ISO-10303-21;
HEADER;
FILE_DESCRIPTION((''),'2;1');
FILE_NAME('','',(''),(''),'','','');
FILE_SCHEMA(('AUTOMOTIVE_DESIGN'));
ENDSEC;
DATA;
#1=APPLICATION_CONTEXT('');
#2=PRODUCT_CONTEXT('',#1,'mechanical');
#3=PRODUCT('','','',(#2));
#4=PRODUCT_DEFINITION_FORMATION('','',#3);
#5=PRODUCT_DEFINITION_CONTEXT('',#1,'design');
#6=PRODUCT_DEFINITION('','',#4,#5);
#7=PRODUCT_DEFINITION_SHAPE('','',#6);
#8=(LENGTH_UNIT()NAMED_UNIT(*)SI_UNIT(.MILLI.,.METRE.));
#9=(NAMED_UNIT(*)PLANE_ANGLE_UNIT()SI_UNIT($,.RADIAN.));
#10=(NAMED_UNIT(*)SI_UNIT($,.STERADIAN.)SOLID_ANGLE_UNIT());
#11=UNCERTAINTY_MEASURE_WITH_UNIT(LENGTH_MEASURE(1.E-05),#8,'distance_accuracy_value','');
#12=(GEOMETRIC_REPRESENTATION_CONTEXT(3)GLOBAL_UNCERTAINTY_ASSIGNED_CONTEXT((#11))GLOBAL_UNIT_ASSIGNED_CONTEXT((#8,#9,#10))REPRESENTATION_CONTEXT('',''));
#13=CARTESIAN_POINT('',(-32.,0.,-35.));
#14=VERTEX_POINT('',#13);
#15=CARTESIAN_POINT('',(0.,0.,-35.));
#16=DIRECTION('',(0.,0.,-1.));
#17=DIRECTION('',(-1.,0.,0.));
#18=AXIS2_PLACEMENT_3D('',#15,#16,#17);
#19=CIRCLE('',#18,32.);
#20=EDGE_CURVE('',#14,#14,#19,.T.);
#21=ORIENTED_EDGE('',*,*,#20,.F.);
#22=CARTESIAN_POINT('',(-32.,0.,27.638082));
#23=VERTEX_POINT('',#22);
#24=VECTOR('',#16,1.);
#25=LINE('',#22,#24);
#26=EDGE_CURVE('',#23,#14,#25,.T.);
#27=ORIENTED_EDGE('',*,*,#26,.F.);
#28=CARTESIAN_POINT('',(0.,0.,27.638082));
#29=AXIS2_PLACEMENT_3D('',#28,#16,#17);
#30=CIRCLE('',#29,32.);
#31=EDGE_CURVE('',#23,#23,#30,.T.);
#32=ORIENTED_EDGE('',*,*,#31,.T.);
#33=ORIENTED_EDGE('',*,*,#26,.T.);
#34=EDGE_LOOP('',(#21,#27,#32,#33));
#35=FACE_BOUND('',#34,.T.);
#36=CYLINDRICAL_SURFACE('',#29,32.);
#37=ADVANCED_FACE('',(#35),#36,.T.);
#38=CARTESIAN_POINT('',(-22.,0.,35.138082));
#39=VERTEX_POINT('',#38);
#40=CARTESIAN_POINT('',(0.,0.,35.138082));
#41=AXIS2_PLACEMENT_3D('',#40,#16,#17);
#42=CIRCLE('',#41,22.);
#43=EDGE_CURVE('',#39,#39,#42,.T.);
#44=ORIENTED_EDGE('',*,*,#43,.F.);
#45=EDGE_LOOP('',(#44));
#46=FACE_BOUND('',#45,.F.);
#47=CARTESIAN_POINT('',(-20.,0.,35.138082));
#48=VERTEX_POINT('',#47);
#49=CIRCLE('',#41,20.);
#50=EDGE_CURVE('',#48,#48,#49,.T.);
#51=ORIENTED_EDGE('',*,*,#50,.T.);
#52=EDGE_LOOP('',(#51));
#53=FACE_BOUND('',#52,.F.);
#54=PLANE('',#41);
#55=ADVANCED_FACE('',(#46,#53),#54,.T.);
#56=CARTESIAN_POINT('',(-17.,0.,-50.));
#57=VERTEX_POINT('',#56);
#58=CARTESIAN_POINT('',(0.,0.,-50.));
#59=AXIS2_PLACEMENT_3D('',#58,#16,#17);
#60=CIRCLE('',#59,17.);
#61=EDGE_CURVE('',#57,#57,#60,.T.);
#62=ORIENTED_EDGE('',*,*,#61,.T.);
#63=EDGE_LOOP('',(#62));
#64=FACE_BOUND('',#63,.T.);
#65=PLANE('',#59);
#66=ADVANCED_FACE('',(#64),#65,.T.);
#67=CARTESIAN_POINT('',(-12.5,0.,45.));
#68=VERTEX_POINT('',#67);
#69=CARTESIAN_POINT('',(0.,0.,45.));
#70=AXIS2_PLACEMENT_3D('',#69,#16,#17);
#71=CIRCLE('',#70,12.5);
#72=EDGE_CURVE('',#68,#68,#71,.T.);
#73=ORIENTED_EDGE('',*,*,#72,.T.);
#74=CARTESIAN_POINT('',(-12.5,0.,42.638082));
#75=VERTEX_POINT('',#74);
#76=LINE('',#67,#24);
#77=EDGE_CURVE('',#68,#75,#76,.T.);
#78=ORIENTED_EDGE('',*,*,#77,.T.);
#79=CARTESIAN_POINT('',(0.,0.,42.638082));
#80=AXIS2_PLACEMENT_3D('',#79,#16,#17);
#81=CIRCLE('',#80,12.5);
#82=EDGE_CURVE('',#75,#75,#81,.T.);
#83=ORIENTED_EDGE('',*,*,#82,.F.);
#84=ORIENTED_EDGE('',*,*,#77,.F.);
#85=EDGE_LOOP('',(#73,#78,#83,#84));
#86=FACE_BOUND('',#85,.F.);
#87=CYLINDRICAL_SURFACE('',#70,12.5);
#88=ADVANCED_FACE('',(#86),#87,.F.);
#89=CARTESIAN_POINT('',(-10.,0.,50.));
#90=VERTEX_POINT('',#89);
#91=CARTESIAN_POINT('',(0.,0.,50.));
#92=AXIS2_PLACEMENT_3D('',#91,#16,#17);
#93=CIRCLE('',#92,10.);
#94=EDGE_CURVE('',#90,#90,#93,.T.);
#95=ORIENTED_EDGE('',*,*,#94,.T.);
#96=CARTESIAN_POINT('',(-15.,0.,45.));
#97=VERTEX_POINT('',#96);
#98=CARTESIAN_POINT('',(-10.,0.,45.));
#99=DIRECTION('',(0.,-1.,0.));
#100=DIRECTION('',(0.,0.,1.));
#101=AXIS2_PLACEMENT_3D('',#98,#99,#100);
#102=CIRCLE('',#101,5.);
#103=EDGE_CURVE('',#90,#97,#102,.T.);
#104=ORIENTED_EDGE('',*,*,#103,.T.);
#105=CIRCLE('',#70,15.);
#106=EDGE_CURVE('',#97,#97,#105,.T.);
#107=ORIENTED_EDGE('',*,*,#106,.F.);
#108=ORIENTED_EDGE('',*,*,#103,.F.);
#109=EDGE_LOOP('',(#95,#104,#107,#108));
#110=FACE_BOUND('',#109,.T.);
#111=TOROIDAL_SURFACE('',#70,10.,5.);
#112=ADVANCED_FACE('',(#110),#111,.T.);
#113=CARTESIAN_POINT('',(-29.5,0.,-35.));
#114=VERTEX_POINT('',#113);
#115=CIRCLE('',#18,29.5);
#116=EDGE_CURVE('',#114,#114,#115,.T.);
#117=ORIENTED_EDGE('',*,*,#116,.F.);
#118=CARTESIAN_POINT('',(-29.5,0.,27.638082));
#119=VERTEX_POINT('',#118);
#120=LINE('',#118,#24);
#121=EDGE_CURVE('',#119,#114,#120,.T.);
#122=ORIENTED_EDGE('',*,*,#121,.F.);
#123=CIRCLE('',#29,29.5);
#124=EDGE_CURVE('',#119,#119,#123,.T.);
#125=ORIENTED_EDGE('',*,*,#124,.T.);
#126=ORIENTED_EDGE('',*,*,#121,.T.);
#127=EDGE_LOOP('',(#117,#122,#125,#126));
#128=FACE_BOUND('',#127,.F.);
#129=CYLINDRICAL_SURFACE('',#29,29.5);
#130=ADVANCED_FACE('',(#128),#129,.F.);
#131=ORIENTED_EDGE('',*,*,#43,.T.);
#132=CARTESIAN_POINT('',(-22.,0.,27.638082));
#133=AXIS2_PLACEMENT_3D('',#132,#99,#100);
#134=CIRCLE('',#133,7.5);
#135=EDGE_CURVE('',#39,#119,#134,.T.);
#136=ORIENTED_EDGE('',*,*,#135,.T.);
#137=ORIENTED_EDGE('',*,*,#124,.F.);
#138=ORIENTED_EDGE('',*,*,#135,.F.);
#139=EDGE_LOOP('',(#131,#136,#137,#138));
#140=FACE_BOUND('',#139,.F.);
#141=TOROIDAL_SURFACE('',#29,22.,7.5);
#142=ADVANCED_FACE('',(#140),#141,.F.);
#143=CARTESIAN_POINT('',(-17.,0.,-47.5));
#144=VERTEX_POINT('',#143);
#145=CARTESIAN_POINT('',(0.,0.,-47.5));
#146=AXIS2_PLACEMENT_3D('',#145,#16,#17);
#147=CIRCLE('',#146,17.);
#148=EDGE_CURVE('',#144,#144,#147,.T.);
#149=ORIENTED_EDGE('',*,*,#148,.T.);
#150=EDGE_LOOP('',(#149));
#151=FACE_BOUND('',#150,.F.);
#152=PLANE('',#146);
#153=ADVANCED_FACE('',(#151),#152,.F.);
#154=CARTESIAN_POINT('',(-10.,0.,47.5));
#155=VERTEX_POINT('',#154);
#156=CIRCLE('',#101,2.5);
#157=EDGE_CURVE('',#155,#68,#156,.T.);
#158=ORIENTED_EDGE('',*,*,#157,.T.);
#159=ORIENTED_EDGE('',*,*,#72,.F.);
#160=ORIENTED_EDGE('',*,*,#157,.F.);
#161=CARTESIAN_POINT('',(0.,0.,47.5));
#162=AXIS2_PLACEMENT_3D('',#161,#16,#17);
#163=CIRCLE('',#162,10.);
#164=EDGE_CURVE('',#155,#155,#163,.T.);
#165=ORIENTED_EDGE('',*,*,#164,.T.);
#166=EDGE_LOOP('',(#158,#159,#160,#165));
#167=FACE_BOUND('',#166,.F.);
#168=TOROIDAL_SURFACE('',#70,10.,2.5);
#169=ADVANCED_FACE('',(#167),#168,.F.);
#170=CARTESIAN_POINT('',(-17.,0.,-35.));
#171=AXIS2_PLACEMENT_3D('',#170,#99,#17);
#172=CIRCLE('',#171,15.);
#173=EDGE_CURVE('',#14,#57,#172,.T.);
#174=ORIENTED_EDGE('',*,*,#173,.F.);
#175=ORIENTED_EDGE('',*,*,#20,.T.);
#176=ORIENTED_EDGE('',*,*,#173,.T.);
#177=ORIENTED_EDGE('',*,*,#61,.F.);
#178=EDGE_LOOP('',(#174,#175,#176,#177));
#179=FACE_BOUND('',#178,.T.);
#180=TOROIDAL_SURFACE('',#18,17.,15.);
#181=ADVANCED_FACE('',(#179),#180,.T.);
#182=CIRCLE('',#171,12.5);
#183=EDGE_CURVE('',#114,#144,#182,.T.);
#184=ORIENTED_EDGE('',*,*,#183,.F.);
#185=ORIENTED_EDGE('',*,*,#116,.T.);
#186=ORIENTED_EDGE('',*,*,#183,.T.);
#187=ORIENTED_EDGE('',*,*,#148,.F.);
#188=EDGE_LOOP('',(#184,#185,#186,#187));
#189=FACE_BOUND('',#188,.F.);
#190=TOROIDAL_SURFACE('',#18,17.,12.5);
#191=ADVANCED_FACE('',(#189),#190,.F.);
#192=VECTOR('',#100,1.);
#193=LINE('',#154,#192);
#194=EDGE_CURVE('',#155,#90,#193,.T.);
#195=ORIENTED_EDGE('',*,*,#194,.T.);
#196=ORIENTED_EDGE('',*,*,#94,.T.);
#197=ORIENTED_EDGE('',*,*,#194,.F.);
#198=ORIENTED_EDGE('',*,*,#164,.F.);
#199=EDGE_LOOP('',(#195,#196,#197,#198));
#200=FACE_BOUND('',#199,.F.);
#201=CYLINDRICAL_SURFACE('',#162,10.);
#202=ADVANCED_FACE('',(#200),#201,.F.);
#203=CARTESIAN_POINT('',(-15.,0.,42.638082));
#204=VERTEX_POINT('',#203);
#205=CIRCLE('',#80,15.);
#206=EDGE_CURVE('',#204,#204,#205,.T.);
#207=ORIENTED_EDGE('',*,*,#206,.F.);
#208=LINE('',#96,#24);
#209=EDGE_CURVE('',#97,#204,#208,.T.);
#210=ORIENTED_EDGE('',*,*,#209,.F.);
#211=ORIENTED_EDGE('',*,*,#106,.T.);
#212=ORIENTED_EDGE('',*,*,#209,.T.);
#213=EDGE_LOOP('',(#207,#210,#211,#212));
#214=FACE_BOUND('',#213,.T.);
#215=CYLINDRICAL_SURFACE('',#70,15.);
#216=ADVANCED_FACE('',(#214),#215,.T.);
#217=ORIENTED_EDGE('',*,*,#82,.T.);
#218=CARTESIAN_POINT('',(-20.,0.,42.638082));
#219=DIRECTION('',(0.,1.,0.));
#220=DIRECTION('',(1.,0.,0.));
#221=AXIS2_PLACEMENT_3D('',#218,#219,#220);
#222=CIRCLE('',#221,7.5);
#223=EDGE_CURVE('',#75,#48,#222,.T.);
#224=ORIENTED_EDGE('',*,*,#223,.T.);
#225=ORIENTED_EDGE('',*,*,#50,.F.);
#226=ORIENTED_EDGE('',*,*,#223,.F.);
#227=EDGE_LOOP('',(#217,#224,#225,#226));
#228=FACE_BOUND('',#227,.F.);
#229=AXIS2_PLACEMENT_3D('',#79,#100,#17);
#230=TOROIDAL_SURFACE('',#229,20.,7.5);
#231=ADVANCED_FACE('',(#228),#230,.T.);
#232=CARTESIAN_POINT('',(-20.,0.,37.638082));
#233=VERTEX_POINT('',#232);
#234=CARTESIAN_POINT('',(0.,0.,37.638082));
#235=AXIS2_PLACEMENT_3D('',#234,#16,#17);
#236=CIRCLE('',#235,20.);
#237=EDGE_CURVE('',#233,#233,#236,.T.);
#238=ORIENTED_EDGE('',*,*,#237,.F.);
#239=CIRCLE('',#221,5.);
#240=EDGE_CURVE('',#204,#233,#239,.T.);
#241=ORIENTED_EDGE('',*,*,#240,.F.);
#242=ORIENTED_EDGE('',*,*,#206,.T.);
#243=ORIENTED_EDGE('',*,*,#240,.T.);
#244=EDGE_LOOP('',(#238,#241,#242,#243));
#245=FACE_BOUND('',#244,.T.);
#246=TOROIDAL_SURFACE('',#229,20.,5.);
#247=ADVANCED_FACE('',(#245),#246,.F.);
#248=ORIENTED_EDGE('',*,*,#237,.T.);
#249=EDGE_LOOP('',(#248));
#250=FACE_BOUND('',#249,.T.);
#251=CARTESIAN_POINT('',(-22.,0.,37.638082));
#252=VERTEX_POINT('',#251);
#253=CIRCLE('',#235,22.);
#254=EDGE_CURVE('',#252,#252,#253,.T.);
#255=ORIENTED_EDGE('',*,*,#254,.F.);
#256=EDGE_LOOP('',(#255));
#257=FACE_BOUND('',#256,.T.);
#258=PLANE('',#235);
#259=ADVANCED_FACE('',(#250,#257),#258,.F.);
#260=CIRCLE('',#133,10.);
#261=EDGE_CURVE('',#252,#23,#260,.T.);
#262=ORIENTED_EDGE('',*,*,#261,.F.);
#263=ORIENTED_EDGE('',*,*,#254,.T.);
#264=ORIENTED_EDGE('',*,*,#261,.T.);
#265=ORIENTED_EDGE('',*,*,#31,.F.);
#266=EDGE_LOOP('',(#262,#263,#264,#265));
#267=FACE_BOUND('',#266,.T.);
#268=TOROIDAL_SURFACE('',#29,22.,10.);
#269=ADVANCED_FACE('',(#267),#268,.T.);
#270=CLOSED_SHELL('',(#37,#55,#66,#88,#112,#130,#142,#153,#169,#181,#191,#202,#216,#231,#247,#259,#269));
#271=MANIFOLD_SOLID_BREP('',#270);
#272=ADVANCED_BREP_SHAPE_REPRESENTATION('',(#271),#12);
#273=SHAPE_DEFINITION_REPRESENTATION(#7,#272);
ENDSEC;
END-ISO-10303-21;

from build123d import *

# Parameters (mm, degrees)
F2_T = -2.5


# Not quite as in the source:
# - a shell that OpenCascade refuses in one call is made with other operations: the cavity is built on its own and cut out


with BuildPart() as f1:
    # F0 (on Front) → F1 (revolve)
    with BuildSketch(Plane.XZ):
        with BuildLine():
            Line((0, -50), (0, 50))
            Line((0, 50), (-10, 50))
            ThreePointArc((-10, 50), (-13.5355339059, 48.5355339059), (-15, 45))
            Line((-15, 45), (-15, 42.6380823553))
            ThreePointArc((-15, 42.6380823553), (-16.4644660941, 39.1025484493), (-20, 37.6380823553))
            Line((-20, 37.6380823553), (-22, 37.6380823553))
            ThreePointArc((-22, 37.6380823553), (-29.0710678119, 34.7091501671), (-32, 27.6380823553))
            Line((-32, 27.6380823553), (-32, -35))
            ThreePointArc((-32, -35), (-27.6066017178, -45.6066017178), (-17, -50))
            Line((-17, -50), (0, -50))
        make_face()
    revolve(axis=Axis((0, 0, 0), (0, 0, -1)))

    # F2: a shell. OpenCascade refuses it in one call, so the cavity is built on its own and cut out:
    # the body offset inwards by the wall thickness, plus a prism from it out through each open face.
    f2_core = offset(f1.part, amount=F2_T, mode=Mode.PRIVATE)
    f2_exits = [f2_core.faces().sort_by_distance(p)[0] for p in [
        (0, 0, 47.5),
    ]]
    add(f2_core, mode=Mode.SUBTRACT)
    extrude(f2_exits, amount=-F2_T, mode=Mode.SUBTRACT)


solid = f1.part
